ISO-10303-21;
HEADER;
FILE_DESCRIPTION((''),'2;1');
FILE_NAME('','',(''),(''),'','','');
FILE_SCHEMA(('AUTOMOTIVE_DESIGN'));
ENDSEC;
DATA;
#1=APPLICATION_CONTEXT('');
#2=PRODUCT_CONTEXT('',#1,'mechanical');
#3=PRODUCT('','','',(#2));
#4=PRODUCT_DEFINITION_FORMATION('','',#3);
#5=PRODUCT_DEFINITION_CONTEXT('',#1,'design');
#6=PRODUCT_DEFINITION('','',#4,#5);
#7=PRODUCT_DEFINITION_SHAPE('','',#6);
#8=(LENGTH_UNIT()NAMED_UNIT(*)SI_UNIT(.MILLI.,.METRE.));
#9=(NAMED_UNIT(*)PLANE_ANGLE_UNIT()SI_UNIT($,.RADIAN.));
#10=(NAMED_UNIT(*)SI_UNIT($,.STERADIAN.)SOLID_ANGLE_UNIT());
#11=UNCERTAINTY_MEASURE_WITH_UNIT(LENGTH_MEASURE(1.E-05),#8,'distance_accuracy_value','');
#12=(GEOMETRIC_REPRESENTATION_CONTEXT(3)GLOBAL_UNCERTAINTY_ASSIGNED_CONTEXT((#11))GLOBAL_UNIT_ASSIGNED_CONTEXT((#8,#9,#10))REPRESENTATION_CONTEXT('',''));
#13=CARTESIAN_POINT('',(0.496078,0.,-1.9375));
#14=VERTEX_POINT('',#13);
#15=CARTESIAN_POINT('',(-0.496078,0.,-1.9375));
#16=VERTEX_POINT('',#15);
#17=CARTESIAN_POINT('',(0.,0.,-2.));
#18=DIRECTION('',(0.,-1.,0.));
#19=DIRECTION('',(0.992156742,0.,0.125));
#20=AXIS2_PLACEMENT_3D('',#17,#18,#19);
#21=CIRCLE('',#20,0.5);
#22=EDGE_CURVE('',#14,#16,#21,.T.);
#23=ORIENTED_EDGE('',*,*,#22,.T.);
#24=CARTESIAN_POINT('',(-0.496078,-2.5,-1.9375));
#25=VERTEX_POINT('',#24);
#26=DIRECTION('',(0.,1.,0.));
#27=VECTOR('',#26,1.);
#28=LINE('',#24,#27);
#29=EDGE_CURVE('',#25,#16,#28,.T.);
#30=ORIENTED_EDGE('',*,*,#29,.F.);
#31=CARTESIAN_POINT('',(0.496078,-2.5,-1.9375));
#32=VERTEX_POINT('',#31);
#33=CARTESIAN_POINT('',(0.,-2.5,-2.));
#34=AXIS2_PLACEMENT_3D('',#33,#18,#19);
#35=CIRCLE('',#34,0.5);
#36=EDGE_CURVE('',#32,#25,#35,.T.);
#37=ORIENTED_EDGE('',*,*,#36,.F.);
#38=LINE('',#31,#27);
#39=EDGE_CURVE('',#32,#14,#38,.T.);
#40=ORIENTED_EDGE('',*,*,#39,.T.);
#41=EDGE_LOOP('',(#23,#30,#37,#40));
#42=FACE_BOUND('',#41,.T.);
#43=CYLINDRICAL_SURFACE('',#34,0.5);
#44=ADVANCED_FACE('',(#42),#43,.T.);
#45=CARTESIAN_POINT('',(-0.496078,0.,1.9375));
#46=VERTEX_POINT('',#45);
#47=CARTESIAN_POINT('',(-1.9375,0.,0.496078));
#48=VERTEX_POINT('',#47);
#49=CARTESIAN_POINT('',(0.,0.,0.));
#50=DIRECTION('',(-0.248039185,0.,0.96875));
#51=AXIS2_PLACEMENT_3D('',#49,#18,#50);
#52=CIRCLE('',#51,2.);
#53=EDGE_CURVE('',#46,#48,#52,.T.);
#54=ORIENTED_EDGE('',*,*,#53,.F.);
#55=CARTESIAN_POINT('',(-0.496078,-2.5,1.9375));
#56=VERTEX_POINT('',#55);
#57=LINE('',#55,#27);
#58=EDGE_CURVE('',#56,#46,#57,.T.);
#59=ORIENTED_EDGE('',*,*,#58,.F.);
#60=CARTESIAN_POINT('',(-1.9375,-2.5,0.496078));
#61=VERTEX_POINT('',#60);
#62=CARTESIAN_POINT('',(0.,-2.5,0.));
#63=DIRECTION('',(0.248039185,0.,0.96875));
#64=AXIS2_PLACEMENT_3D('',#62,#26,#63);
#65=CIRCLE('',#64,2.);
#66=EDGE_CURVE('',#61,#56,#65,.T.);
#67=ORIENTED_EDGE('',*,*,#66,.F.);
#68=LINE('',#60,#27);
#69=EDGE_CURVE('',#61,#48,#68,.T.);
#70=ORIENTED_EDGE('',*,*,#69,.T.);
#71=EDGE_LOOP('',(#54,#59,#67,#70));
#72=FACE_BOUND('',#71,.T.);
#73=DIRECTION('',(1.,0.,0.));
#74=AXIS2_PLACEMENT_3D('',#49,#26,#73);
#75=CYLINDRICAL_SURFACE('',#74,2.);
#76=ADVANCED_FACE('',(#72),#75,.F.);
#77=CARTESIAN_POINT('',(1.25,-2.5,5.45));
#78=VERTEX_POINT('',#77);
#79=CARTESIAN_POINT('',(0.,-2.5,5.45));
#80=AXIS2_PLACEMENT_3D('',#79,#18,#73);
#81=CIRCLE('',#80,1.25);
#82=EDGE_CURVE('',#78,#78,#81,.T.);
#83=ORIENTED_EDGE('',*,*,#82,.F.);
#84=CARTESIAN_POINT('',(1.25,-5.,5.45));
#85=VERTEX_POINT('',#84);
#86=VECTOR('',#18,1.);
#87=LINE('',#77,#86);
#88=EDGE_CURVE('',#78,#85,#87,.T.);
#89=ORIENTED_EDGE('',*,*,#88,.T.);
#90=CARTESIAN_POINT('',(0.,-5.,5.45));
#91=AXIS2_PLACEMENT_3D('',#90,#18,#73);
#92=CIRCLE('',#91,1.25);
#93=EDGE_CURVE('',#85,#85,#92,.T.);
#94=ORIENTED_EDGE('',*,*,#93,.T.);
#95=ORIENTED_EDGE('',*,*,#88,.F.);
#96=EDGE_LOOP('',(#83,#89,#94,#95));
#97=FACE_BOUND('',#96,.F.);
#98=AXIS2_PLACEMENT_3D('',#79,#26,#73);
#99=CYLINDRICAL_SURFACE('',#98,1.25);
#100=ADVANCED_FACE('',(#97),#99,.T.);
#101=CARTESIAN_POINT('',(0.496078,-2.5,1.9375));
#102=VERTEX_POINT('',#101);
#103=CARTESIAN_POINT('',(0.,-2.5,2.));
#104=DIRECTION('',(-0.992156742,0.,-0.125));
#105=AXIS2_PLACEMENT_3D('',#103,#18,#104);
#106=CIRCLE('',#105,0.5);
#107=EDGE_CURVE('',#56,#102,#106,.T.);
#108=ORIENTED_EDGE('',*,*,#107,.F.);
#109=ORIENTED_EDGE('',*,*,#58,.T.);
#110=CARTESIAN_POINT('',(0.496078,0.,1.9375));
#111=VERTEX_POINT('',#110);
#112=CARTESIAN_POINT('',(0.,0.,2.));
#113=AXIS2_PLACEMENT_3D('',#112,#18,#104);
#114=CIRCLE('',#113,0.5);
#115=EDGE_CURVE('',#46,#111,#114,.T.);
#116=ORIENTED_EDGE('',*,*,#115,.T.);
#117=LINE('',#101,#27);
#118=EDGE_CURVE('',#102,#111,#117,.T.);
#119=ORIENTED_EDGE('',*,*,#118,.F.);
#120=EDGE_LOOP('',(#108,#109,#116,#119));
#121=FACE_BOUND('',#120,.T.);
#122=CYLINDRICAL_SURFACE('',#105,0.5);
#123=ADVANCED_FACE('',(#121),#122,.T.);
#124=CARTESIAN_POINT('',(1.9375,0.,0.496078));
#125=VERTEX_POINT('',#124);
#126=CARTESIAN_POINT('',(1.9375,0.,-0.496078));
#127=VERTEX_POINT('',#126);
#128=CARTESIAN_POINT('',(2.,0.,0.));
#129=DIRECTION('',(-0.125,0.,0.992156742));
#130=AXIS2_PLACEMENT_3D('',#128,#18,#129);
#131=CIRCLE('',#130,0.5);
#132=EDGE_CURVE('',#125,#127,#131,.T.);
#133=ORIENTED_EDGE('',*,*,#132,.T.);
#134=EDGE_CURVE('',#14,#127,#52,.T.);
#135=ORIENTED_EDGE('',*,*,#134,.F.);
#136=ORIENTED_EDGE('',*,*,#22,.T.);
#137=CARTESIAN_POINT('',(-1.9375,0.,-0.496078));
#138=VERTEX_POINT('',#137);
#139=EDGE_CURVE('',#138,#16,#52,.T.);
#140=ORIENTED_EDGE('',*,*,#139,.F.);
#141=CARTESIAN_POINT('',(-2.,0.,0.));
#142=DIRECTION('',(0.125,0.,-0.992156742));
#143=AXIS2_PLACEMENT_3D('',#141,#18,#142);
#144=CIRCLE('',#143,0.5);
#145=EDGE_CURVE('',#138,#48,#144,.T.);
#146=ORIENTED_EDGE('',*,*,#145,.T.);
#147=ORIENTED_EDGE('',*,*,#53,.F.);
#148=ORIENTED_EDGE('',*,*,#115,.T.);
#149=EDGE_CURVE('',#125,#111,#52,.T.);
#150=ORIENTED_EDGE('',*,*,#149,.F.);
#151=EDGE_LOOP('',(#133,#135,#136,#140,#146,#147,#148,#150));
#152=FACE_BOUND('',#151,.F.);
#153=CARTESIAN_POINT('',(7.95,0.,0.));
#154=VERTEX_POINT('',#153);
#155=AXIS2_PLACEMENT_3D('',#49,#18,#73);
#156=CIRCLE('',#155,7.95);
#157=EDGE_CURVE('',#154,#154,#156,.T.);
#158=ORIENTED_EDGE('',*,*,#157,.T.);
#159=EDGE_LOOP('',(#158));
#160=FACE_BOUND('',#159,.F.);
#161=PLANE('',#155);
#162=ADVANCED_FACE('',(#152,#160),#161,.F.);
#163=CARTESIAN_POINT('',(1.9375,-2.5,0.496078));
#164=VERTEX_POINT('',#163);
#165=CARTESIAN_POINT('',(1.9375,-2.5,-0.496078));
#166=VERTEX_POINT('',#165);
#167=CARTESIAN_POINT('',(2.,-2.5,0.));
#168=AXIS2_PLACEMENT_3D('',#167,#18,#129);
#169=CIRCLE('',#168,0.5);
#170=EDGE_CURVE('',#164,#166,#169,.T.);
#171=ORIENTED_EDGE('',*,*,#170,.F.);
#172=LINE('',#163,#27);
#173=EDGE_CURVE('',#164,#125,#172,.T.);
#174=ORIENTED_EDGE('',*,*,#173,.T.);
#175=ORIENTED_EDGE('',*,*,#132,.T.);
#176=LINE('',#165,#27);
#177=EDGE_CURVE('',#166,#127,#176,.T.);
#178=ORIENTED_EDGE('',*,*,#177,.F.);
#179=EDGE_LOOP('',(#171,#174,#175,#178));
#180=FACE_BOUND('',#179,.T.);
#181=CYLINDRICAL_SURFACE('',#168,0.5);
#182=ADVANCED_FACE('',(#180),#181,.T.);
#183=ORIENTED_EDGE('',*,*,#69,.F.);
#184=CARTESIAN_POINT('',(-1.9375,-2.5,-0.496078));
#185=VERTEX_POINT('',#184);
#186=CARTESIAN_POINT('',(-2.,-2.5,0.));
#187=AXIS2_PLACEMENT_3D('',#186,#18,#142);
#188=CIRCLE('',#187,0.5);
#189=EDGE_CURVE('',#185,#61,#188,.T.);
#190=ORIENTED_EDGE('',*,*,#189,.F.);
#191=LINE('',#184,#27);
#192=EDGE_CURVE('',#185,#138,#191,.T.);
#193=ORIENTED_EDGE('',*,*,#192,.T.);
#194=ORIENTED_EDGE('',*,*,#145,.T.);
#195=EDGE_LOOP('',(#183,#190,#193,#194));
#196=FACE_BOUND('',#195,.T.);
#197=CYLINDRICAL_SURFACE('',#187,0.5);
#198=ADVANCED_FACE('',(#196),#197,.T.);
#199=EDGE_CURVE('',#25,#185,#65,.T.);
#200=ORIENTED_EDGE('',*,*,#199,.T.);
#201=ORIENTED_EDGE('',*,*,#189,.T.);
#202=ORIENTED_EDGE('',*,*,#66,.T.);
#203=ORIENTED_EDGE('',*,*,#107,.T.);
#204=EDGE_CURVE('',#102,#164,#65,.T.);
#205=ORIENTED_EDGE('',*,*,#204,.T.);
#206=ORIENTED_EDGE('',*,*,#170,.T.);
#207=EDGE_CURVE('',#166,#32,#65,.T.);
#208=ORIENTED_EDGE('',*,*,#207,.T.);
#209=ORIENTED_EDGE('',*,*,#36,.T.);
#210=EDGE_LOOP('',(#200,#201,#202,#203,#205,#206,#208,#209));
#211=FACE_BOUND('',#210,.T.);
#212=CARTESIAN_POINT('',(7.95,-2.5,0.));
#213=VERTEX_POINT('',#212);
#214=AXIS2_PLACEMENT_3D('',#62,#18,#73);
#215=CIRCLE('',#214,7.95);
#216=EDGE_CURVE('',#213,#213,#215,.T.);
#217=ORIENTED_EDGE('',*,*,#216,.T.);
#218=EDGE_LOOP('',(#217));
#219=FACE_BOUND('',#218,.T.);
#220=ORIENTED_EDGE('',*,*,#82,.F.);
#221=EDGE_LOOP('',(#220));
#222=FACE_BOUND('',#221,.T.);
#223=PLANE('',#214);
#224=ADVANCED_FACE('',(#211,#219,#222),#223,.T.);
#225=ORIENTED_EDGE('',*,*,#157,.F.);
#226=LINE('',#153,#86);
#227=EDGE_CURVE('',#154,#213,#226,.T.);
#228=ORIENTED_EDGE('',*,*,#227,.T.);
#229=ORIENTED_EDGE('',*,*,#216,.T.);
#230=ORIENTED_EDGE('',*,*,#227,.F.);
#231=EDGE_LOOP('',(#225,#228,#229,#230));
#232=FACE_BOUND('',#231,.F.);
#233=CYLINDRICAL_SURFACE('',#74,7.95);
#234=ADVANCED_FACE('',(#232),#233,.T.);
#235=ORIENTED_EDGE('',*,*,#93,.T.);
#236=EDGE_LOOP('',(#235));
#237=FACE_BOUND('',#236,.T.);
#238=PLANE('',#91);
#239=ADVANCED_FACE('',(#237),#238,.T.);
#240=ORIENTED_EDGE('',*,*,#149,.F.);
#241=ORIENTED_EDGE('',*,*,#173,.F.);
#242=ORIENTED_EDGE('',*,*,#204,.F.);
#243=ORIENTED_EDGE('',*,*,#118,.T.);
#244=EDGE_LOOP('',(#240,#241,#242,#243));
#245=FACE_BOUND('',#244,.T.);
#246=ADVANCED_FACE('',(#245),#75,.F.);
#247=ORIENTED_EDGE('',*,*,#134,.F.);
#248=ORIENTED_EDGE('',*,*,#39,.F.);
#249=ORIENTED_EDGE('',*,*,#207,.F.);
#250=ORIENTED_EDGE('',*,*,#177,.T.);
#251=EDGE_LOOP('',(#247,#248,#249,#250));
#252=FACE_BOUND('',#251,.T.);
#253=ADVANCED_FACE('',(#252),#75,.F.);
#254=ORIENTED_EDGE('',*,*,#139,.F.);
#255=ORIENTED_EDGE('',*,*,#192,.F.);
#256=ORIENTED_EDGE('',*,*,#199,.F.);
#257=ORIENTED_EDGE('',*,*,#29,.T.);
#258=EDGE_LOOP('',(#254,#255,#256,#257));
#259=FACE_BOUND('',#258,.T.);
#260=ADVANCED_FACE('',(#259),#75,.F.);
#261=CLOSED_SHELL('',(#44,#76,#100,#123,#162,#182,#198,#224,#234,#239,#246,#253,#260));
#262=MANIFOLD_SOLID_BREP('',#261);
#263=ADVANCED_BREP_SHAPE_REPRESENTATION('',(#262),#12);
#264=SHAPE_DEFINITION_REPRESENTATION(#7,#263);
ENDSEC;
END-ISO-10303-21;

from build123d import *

# Parameters (mm, degrees)
F0_R            = 7.95
F0_R_2          = 2
F1_DEPTH        = 2.5
F2_R            = 1.25
F3_DEPTH        = 2.5
F5_DEPTH        = 2.5
F5_COPIES_COUNT = 4


# Not quite as in the source:
# - a pattern or mirror of a feature is missing from the dataset's text; its kind, count and spacing are read off the source's solid


with BuildPart() as f1:
    # F0 (on Front) → F1 (new body)
    with BuildSketch(Plane.XZ):
        Circle(F0_R)
        Circle(F0_R_2, mode=Mode.SUBTRACT)
    extrude(amount=F1_DEPTH)

    # F2 (on face) → F3 (join)
    with BuildSketch(Plane.XZ.offset(2.5)):
        with Locations((0, 5.45)):
            Circle(F2_R)
    extrude(amount=F3_DEPTH)

    # F4 (on face) → F5 (join, through all)
    with BuildSketch(Plane.XZ.offset(2.5)):
        with BuildLine():
            ThreePointArc((-0.4960783708, 1.9375), (0, 1.5), (0.4960783708, 1.9375))
            ThreePointArc((0.4960783708, 1.9375), (0, 2), (-0.4960783708, 1.9375))
        make_face()
    f5 = extrude(amount=-F5_DEPTH)

    # F5_copies: F5 ×4 about axis
    f5_copies_axis = Axis((0, 0, 0), (0, 1, 0))
    for i in range(1, F5_COPIES_COUNT):
        add(f5.rotate(f5_copies_axis, i * 360 / F5_COPIES_COUNT))


solid = f1.part
